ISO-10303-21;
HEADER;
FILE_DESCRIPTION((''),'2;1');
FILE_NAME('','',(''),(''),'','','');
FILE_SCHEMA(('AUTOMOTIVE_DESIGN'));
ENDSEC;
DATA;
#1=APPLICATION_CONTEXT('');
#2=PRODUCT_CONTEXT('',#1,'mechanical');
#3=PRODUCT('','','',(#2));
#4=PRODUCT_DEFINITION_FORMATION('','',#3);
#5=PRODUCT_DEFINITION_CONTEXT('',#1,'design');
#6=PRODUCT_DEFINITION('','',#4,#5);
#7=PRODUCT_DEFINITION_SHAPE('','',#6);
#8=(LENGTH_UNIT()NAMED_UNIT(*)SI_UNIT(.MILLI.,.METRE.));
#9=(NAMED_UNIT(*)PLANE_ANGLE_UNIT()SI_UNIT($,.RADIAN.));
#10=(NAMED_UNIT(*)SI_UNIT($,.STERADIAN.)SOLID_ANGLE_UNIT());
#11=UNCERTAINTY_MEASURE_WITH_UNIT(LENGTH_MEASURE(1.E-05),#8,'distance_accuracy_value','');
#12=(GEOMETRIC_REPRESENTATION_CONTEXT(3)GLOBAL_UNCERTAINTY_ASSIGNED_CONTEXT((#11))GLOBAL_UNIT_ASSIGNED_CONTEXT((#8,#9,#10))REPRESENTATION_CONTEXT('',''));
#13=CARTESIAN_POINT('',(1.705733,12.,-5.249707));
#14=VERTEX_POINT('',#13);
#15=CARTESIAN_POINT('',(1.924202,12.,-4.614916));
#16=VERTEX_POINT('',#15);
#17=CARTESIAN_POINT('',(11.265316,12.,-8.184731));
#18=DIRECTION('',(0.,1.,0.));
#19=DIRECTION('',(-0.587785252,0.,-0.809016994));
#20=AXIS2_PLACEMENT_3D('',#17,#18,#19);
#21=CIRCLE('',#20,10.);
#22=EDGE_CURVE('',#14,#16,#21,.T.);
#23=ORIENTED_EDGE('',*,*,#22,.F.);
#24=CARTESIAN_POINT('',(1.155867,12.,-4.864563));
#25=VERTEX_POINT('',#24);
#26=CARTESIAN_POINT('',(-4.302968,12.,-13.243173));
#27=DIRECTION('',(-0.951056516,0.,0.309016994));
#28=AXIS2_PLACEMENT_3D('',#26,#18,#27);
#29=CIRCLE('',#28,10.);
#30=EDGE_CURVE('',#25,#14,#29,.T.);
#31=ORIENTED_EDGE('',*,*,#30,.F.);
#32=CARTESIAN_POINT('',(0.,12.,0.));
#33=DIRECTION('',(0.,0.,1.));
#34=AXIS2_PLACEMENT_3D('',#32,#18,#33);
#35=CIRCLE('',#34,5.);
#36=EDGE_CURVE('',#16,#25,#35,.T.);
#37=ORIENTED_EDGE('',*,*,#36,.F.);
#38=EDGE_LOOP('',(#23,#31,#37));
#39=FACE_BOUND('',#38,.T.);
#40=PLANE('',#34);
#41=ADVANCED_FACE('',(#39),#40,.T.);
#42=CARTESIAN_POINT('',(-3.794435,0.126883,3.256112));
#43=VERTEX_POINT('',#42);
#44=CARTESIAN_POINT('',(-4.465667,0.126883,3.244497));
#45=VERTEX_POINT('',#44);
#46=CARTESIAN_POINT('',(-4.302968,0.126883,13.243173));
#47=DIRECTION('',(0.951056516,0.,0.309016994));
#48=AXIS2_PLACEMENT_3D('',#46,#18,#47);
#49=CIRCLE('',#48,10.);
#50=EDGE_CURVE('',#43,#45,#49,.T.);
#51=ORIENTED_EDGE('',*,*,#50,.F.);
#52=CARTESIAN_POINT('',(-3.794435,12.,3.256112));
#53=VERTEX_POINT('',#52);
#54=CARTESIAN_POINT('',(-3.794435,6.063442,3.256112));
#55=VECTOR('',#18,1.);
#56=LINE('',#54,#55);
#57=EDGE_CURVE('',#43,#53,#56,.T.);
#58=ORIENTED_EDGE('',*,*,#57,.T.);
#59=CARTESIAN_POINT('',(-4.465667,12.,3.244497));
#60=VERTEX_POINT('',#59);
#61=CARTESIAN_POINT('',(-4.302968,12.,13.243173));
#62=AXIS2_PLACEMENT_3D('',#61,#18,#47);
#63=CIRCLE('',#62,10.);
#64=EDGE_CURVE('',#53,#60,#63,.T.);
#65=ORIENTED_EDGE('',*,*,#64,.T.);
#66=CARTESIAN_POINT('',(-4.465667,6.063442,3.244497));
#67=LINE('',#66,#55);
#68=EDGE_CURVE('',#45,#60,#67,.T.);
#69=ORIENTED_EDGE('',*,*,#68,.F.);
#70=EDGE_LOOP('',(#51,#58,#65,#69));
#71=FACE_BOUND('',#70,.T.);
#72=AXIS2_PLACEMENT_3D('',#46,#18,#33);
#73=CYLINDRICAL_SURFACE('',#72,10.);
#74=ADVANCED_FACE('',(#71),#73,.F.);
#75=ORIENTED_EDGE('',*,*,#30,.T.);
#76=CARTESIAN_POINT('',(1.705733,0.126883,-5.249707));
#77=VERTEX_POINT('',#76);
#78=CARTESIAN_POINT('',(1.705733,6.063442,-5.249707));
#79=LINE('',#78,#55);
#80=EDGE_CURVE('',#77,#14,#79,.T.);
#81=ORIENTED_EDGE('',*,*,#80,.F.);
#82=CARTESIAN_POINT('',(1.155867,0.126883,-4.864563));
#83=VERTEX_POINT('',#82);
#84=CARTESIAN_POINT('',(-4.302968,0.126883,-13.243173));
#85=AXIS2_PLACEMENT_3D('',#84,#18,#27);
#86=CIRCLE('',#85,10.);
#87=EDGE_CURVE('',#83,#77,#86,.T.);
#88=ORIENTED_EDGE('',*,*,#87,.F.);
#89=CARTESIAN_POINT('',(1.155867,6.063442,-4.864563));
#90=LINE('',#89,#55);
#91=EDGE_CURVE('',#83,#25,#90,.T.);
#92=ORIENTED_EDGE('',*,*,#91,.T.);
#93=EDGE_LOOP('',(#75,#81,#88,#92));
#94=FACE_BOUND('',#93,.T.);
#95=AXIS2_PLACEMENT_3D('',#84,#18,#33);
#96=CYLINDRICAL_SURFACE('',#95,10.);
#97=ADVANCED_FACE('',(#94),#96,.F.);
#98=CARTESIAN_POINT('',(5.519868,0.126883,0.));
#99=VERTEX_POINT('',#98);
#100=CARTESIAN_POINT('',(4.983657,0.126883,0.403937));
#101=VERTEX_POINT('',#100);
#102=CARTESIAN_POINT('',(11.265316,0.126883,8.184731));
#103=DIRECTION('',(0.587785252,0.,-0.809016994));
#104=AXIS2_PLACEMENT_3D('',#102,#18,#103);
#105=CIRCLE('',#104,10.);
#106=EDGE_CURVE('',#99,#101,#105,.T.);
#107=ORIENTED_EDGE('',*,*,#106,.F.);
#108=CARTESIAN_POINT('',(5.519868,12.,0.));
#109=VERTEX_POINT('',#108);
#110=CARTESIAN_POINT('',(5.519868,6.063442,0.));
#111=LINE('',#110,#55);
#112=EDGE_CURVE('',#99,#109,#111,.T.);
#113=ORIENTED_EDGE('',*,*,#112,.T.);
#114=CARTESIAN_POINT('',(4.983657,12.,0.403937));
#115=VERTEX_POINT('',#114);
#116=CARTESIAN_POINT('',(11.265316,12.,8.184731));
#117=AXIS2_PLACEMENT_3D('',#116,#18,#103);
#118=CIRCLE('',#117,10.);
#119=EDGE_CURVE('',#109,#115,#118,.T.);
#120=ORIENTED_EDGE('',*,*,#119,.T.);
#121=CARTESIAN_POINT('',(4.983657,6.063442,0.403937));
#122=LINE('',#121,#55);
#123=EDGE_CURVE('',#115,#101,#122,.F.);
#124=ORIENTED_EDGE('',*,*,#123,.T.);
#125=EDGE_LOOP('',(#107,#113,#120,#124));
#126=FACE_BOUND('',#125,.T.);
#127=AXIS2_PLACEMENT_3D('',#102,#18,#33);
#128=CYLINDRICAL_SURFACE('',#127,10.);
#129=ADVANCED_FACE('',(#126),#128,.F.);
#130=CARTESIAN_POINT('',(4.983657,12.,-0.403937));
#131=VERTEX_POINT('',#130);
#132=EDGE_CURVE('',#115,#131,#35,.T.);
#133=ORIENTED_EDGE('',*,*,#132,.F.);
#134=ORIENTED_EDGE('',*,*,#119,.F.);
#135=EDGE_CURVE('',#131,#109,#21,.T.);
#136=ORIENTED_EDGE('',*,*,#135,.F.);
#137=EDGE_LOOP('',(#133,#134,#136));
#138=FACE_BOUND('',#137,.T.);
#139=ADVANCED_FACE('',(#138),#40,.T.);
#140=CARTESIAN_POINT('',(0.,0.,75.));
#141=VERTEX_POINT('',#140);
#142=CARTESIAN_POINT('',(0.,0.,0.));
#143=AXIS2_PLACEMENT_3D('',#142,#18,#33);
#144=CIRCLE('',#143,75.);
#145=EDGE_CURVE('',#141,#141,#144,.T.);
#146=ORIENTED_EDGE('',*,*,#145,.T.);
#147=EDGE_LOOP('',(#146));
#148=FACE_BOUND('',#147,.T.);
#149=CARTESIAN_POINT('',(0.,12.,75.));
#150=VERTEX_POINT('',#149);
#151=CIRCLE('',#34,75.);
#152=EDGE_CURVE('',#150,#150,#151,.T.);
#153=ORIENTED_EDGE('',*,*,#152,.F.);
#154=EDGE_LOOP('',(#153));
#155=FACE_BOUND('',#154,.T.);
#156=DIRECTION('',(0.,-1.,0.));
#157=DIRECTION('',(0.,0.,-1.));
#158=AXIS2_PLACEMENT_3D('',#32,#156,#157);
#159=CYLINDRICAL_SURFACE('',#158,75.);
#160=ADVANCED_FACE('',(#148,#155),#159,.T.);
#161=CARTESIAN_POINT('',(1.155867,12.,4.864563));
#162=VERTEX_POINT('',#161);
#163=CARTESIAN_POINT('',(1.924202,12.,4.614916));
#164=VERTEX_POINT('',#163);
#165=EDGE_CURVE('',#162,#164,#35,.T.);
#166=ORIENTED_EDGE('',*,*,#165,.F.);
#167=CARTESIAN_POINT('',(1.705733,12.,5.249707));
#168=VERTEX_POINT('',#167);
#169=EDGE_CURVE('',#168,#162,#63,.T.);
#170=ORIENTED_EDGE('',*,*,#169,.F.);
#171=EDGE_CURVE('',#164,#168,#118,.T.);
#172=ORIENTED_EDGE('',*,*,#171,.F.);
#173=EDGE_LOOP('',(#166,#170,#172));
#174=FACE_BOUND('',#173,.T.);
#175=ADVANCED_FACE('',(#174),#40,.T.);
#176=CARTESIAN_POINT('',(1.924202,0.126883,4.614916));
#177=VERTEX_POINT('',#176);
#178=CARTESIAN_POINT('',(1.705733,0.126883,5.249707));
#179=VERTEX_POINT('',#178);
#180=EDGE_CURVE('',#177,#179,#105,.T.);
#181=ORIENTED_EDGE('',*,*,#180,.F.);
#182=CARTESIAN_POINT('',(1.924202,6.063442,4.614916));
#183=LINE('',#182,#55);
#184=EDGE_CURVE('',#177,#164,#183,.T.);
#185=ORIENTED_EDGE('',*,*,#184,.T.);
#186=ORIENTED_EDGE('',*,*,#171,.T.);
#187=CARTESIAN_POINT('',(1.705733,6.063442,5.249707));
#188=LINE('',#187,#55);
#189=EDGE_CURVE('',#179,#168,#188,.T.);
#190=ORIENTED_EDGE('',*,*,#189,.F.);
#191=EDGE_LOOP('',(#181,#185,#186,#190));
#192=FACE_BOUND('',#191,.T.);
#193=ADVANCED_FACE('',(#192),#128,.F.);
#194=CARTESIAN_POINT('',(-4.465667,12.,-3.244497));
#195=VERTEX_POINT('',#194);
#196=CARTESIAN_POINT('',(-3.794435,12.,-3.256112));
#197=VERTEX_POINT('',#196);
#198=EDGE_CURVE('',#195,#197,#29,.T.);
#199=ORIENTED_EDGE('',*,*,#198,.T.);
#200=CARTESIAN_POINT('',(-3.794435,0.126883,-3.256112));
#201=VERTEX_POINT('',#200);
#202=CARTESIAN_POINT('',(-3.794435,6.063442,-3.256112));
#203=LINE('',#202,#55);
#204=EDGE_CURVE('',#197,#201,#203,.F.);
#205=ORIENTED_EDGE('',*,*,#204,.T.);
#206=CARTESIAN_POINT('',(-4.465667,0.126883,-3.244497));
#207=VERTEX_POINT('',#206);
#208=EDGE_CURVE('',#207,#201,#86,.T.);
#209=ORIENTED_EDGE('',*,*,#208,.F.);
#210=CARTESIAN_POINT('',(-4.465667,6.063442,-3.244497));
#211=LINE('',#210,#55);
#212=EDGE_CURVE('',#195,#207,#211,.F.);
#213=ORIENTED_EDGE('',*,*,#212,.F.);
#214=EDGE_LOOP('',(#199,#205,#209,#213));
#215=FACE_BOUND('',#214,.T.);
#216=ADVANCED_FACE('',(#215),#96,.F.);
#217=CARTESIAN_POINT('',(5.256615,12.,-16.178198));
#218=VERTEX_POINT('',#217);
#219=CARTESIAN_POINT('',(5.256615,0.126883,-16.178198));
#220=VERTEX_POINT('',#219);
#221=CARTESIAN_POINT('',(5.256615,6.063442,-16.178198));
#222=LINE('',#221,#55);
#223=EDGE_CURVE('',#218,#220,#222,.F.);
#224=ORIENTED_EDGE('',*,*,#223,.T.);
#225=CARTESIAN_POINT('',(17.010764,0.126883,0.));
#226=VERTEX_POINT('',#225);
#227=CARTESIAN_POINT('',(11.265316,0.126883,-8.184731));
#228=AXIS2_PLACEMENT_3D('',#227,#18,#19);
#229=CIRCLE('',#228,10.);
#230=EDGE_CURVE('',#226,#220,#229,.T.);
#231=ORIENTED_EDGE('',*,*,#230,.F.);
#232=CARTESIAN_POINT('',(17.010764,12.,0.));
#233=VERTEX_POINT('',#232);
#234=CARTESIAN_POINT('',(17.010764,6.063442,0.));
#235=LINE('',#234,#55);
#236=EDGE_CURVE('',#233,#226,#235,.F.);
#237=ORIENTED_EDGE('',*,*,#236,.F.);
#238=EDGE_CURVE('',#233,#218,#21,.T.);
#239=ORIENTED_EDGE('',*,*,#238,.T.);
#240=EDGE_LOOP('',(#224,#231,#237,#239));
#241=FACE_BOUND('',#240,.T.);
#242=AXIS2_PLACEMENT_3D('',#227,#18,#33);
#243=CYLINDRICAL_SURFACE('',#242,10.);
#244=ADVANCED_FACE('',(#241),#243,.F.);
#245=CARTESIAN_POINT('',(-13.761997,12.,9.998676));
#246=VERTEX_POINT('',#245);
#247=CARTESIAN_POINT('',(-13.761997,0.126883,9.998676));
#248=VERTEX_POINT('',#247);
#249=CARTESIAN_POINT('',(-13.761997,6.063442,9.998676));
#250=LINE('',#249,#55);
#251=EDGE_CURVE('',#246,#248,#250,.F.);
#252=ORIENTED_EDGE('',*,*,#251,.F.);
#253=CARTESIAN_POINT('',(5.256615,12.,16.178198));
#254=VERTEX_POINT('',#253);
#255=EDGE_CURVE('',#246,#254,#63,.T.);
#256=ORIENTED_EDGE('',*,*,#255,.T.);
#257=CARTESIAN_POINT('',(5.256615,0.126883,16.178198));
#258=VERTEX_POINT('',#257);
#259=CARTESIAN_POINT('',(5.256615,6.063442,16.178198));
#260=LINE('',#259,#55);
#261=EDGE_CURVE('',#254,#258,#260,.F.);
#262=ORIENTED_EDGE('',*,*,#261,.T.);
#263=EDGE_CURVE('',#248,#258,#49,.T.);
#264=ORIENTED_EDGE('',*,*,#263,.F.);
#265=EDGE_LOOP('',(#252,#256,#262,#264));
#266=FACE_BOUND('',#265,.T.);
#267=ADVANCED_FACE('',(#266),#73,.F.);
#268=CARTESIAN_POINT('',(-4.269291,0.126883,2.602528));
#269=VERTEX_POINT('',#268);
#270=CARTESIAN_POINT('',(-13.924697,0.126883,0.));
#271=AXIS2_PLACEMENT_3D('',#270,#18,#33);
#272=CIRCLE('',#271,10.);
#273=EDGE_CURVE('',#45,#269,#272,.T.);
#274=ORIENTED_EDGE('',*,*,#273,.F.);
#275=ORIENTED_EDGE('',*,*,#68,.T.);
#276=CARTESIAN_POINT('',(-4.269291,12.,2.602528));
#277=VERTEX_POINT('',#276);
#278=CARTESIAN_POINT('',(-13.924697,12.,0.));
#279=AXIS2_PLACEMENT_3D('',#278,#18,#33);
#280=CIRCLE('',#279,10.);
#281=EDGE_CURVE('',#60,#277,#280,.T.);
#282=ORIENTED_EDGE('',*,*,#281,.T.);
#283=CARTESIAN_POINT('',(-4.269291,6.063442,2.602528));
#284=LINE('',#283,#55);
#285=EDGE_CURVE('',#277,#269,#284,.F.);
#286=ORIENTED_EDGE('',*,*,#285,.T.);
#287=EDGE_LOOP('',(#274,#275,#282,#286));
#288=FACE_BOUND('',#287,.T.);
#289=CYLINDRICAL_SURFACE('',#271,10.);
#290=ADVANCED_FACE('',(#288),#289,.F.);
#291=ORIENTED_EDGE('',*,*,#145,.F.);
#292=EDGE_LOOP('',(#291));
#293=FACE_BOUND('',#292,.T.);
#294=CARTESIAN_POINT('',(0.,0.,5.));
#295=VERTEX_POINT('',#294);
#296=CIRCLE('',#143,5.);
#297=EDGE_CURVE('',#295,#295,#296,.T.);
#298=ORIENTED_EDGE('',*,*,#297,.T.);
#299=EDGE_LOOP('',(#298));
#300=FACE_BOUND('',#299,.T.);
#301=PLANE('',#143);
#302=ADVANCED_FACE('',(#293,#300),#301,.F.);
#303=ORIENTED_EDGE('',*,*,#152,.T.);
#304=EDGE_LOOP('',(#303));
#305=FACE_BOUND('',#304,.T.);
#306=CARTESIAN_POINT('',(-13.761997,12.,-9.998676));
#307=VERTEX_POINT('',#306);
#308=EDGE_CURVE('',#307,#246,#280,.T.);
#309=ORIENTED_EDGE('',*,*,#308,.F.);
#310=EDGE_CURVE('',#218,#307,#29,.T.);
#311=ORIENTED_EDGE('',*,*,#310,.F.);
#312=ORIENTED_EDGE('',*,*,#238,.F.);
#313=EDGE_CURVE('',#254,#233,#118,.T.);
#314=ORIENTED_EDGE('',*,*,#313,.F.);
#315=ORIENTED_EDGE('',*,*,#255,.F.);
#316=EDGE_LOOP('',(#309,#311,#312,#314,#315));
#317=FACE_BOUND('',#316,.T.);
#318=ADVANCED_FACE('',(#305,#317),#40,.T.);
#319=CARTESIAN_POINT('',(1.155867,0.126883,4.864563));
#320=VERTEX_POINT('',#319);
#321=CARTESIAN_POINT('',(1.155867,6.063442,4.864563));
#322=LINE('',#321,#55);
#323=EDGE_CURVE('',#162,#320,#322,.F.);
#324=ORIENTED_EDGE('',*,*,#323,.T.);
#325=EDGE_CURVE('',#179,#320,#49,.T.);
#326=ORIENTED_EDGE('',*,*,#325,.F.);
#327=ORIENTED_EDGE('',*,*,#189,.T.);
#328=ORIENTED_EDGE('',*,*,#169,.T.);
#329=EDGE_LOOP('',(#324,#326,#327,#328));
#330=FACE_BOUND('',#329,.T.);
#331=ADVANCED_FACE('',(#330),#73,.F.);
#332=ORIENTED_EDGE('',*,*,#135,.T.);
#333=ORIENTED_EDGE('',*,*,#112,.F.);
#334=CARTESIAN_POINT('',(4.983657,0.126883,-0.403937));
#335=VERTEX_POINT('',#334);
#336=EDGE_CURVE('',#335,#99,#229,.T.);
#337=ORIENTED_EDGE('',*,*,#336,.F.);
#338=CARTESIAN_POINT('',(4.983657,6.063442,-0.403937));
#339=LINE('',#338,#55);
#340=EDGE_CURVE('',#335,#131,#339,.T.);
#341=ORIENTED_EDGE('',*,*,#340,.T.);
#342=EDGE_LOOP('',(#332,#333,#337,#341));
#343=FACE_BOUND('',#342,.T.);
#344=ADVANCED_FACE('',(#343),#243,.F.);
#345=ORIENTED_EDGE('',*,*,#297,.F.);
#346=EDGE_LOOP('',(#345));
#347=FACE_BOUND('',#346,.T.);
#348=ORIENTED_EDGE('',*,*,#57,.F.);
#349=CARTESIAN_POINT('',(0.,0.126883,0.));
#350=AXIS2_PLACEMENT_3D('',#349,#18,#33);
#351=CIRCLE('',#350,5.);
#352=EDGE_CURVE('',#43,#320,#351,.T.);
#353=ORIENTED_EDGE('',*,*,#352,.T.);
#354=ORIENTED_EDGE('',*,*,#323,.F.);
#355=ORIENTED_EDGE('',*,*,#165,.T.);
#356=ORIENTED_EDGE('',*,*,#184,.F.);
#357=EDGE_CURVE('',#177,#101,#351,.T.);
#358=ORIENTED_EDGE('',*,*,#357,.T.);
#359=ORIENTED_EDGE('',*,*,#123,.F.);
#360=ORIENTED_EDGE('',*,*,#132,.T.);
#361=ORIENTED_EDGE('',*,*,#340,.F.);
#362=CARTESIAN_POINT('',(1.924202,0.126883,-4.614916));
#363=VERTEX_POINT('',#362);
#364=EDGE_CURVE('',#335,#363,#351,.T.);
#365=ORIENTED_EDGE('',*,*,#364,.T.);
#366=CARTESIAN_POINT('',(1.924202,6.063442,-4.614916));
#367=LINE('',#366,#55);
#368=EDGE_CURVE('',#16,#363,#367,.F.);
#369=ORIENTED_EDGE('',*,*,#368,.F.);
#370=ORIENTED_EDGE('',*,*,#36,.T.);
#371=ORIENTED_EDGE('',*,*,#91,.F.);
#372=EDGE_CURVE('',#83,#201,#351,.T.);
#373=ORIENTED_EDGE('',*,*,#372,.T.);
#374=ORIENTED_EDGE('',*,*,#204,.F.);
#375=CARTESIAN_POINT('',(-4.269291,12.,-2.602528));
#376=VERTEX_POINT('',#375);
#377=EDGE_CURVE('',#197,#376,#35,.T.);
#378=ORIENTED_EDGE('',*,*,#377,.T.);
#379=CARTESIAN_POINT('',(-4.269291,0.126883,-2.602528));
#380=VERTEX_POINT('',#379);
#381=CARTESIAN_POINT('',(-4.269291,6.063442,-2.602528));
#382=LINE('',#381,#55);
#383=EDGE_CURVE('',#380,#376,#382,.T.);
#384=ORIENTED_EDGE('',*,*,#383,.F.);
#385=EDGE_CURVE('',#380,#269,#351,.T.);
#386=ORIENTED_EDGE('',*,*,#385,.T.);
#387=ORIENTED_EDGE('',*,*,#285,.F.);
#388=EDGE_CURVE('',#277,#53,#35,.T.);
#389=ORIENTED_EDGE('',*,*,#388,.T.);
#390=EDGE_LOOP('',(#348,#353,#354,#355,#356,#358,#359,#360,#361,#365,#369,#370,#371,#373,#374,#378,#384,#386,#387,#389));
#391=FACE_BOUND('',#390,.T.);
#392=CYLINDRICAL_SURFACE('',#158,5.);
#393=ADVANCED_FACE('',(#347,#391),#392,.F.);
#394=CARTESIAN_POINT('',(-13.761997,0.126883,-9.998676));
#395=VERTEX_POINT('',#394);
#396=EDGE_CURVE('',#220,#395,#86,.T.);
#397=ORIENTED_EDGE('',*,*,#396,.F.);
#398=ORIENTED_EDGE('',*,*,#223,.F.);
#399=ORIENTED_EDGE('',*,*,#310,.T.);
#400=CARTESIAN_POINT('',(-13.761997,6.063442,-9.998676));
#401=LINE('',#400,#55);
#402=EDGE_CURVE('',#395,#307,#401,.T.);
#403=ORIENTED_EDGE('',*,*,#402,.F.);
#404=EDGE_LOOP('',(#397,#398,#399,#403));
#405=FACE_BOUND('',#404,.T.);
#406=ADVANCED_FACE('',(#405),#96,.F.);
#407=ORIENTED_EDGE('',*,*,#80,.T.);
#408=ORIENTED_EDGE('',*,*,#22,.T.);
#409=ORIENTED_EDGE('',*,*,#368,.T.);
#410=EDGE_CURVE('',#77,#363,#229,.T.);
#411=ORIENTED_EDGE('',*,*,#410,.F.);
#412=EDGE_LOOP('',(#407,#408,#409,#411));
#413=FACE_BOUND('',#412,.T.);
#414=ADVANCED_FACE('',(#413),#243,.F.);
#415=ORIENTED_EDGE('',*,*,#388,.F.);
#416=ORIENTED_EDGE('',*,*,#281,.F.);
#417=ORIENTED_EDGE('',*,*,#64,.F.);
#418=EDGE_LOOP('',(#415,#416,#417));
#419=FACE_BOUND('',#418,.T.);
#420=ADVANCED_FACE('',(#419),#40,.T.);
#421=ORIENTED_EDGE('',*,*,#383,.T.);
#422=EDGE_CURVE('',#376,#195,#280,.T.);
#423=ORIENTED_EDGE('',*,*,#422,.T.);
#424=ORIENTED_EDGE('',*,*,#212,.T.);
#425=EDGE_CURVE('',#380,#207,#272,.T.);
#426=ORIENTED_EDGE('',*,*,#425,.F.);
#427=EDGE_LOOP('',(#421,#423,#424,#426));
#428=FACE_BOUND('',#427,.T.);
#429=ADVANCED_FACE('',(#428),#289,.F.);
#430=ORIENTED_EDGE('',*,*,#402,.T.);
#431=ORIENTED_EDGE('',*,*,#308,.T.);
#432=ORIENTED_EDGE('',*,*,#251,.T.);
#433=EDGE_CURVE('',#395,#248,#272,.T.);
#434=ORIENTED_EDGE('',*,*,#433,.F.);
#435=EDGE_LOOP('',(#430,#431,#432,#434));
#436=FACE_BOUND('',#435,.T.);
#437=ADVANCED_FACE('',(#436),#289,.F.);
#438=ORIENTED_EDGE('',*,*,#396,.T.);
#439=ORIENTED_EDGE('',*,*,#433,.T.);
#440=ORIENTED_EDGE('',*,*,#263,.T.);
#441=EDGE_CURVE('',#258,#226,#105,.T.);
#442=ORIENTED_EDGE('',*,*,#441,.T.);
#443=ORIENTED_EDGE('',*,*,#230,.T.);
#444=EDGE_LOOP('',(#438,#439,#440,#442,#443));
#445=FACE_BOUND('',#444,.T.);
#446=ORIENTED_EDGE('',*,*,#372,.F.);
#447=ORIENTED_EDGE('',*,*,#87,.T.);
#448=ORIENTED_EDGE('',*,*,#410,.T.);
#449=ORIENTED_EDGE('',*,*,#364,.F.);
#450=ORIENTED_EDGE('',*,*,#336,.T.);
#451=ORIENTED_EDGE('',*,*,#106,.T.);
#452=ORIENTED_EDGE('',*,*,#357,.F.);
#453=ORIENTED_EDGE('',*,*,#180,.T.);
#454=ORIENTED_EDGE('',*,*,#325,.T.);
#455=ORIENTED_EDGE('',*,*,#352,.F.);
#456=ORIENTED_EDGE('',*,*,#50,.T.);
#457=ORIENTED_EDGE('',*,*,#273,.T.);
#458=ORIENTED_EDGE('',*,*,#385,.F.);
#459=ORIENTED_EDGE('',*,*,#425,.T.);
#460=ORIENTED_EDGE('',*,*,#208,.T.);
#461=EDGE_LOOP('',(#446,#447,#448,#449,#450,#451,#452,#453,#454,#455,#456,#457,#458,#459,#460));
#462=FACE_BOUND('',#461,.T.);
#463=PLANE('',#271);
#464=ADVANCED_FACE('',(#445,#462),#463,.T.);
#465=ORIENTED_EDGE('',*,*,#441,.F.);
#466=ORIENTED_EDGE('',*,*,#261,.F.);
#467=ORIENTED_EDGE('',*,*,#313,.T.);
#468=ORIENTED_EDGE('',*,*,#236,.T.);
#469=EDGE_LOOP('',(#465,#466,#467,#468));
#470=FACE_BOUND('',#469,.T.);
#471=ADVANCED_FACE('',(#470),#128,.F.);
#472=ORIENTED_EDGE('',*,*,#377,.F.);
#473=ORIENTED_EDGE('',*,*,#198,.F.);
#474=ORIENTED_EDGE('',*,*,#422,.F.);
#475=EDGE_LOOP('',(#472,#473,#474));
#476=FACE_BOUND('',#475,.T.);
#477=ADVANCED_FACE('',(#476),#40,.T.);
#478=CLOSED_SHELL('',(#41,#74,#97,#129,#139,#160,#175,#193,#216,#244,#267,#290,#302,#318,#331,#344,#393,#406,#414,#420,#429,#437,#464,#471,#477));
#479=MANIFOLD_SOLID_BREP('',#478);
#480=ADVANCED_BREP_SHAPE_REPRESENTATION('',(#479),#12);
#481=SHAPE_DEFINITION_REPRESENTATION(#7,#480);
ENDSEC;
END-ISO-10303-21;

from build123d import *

# Parameters (mm, degrees)
SKETCH1_R           = 75
BOSS_EXTRUDE1_DEPTH = 12
SKETCH2_R           = 5
CUT_EXTRUDE1_DEPTH  = 107.742681248
SKETCH3_R           = 10
CUT_EXTRUDE2_DEPTH  = 11.87311686
CIRPATTERN1_COUNT   = 5


with BuildPart() as part:
    # Sketch1 → Boss-Extrude1 (new body)
    with BuildSketch(Plane(origin=(0, 0, 0), x_dir=(1, 0, 0), z_dir=(0, 1, 0))):
        Circle(SKETCH1_R)
    extrude(amount=BOSS_EXTRUDE1_DEPTH)

    # Sketch2 → Cut-Extrude1 (cut, through all)
    with BuildSketch(Plane(origin=(0, 0, 0), x_dir=(1, 0, 0), z_dir=(0, 1, 0))):
        Circle(SKETCH2_R)
    extrude(amount=CUT_EXTRUDE1_DEPTH, mode=Mode.SUBTRACT)

    # Sketch3 → Cut-Extrude2 (cut)
    with BuildSketch(Plane(origin=(0, 12, 0), x_dir=(1, 0, 0), z_dir=(0, 1, 0))):
        with Locations((-13.924696634, 0)):
            Circle(SKETCH3_R)
    cut_extrude2 = extrude(amount=-CUT_EXTRUDE2_DEPTH, mode=Mode.SUBTRACT)

    # CirPattern1: Cut-Extrude2 ×5 about axis
    cirpattern1_axis = Axis((0, 0, 0), (0, 1, 0))
    for i in range(1, CIRPATTERN1_COUNT):
        add(cut_extrude2.rotate(cirpattern1_axis, i * 360 / CIRPATTERN1_COUNT), mode=Mode.SUBTRACT)


solid = part.part
